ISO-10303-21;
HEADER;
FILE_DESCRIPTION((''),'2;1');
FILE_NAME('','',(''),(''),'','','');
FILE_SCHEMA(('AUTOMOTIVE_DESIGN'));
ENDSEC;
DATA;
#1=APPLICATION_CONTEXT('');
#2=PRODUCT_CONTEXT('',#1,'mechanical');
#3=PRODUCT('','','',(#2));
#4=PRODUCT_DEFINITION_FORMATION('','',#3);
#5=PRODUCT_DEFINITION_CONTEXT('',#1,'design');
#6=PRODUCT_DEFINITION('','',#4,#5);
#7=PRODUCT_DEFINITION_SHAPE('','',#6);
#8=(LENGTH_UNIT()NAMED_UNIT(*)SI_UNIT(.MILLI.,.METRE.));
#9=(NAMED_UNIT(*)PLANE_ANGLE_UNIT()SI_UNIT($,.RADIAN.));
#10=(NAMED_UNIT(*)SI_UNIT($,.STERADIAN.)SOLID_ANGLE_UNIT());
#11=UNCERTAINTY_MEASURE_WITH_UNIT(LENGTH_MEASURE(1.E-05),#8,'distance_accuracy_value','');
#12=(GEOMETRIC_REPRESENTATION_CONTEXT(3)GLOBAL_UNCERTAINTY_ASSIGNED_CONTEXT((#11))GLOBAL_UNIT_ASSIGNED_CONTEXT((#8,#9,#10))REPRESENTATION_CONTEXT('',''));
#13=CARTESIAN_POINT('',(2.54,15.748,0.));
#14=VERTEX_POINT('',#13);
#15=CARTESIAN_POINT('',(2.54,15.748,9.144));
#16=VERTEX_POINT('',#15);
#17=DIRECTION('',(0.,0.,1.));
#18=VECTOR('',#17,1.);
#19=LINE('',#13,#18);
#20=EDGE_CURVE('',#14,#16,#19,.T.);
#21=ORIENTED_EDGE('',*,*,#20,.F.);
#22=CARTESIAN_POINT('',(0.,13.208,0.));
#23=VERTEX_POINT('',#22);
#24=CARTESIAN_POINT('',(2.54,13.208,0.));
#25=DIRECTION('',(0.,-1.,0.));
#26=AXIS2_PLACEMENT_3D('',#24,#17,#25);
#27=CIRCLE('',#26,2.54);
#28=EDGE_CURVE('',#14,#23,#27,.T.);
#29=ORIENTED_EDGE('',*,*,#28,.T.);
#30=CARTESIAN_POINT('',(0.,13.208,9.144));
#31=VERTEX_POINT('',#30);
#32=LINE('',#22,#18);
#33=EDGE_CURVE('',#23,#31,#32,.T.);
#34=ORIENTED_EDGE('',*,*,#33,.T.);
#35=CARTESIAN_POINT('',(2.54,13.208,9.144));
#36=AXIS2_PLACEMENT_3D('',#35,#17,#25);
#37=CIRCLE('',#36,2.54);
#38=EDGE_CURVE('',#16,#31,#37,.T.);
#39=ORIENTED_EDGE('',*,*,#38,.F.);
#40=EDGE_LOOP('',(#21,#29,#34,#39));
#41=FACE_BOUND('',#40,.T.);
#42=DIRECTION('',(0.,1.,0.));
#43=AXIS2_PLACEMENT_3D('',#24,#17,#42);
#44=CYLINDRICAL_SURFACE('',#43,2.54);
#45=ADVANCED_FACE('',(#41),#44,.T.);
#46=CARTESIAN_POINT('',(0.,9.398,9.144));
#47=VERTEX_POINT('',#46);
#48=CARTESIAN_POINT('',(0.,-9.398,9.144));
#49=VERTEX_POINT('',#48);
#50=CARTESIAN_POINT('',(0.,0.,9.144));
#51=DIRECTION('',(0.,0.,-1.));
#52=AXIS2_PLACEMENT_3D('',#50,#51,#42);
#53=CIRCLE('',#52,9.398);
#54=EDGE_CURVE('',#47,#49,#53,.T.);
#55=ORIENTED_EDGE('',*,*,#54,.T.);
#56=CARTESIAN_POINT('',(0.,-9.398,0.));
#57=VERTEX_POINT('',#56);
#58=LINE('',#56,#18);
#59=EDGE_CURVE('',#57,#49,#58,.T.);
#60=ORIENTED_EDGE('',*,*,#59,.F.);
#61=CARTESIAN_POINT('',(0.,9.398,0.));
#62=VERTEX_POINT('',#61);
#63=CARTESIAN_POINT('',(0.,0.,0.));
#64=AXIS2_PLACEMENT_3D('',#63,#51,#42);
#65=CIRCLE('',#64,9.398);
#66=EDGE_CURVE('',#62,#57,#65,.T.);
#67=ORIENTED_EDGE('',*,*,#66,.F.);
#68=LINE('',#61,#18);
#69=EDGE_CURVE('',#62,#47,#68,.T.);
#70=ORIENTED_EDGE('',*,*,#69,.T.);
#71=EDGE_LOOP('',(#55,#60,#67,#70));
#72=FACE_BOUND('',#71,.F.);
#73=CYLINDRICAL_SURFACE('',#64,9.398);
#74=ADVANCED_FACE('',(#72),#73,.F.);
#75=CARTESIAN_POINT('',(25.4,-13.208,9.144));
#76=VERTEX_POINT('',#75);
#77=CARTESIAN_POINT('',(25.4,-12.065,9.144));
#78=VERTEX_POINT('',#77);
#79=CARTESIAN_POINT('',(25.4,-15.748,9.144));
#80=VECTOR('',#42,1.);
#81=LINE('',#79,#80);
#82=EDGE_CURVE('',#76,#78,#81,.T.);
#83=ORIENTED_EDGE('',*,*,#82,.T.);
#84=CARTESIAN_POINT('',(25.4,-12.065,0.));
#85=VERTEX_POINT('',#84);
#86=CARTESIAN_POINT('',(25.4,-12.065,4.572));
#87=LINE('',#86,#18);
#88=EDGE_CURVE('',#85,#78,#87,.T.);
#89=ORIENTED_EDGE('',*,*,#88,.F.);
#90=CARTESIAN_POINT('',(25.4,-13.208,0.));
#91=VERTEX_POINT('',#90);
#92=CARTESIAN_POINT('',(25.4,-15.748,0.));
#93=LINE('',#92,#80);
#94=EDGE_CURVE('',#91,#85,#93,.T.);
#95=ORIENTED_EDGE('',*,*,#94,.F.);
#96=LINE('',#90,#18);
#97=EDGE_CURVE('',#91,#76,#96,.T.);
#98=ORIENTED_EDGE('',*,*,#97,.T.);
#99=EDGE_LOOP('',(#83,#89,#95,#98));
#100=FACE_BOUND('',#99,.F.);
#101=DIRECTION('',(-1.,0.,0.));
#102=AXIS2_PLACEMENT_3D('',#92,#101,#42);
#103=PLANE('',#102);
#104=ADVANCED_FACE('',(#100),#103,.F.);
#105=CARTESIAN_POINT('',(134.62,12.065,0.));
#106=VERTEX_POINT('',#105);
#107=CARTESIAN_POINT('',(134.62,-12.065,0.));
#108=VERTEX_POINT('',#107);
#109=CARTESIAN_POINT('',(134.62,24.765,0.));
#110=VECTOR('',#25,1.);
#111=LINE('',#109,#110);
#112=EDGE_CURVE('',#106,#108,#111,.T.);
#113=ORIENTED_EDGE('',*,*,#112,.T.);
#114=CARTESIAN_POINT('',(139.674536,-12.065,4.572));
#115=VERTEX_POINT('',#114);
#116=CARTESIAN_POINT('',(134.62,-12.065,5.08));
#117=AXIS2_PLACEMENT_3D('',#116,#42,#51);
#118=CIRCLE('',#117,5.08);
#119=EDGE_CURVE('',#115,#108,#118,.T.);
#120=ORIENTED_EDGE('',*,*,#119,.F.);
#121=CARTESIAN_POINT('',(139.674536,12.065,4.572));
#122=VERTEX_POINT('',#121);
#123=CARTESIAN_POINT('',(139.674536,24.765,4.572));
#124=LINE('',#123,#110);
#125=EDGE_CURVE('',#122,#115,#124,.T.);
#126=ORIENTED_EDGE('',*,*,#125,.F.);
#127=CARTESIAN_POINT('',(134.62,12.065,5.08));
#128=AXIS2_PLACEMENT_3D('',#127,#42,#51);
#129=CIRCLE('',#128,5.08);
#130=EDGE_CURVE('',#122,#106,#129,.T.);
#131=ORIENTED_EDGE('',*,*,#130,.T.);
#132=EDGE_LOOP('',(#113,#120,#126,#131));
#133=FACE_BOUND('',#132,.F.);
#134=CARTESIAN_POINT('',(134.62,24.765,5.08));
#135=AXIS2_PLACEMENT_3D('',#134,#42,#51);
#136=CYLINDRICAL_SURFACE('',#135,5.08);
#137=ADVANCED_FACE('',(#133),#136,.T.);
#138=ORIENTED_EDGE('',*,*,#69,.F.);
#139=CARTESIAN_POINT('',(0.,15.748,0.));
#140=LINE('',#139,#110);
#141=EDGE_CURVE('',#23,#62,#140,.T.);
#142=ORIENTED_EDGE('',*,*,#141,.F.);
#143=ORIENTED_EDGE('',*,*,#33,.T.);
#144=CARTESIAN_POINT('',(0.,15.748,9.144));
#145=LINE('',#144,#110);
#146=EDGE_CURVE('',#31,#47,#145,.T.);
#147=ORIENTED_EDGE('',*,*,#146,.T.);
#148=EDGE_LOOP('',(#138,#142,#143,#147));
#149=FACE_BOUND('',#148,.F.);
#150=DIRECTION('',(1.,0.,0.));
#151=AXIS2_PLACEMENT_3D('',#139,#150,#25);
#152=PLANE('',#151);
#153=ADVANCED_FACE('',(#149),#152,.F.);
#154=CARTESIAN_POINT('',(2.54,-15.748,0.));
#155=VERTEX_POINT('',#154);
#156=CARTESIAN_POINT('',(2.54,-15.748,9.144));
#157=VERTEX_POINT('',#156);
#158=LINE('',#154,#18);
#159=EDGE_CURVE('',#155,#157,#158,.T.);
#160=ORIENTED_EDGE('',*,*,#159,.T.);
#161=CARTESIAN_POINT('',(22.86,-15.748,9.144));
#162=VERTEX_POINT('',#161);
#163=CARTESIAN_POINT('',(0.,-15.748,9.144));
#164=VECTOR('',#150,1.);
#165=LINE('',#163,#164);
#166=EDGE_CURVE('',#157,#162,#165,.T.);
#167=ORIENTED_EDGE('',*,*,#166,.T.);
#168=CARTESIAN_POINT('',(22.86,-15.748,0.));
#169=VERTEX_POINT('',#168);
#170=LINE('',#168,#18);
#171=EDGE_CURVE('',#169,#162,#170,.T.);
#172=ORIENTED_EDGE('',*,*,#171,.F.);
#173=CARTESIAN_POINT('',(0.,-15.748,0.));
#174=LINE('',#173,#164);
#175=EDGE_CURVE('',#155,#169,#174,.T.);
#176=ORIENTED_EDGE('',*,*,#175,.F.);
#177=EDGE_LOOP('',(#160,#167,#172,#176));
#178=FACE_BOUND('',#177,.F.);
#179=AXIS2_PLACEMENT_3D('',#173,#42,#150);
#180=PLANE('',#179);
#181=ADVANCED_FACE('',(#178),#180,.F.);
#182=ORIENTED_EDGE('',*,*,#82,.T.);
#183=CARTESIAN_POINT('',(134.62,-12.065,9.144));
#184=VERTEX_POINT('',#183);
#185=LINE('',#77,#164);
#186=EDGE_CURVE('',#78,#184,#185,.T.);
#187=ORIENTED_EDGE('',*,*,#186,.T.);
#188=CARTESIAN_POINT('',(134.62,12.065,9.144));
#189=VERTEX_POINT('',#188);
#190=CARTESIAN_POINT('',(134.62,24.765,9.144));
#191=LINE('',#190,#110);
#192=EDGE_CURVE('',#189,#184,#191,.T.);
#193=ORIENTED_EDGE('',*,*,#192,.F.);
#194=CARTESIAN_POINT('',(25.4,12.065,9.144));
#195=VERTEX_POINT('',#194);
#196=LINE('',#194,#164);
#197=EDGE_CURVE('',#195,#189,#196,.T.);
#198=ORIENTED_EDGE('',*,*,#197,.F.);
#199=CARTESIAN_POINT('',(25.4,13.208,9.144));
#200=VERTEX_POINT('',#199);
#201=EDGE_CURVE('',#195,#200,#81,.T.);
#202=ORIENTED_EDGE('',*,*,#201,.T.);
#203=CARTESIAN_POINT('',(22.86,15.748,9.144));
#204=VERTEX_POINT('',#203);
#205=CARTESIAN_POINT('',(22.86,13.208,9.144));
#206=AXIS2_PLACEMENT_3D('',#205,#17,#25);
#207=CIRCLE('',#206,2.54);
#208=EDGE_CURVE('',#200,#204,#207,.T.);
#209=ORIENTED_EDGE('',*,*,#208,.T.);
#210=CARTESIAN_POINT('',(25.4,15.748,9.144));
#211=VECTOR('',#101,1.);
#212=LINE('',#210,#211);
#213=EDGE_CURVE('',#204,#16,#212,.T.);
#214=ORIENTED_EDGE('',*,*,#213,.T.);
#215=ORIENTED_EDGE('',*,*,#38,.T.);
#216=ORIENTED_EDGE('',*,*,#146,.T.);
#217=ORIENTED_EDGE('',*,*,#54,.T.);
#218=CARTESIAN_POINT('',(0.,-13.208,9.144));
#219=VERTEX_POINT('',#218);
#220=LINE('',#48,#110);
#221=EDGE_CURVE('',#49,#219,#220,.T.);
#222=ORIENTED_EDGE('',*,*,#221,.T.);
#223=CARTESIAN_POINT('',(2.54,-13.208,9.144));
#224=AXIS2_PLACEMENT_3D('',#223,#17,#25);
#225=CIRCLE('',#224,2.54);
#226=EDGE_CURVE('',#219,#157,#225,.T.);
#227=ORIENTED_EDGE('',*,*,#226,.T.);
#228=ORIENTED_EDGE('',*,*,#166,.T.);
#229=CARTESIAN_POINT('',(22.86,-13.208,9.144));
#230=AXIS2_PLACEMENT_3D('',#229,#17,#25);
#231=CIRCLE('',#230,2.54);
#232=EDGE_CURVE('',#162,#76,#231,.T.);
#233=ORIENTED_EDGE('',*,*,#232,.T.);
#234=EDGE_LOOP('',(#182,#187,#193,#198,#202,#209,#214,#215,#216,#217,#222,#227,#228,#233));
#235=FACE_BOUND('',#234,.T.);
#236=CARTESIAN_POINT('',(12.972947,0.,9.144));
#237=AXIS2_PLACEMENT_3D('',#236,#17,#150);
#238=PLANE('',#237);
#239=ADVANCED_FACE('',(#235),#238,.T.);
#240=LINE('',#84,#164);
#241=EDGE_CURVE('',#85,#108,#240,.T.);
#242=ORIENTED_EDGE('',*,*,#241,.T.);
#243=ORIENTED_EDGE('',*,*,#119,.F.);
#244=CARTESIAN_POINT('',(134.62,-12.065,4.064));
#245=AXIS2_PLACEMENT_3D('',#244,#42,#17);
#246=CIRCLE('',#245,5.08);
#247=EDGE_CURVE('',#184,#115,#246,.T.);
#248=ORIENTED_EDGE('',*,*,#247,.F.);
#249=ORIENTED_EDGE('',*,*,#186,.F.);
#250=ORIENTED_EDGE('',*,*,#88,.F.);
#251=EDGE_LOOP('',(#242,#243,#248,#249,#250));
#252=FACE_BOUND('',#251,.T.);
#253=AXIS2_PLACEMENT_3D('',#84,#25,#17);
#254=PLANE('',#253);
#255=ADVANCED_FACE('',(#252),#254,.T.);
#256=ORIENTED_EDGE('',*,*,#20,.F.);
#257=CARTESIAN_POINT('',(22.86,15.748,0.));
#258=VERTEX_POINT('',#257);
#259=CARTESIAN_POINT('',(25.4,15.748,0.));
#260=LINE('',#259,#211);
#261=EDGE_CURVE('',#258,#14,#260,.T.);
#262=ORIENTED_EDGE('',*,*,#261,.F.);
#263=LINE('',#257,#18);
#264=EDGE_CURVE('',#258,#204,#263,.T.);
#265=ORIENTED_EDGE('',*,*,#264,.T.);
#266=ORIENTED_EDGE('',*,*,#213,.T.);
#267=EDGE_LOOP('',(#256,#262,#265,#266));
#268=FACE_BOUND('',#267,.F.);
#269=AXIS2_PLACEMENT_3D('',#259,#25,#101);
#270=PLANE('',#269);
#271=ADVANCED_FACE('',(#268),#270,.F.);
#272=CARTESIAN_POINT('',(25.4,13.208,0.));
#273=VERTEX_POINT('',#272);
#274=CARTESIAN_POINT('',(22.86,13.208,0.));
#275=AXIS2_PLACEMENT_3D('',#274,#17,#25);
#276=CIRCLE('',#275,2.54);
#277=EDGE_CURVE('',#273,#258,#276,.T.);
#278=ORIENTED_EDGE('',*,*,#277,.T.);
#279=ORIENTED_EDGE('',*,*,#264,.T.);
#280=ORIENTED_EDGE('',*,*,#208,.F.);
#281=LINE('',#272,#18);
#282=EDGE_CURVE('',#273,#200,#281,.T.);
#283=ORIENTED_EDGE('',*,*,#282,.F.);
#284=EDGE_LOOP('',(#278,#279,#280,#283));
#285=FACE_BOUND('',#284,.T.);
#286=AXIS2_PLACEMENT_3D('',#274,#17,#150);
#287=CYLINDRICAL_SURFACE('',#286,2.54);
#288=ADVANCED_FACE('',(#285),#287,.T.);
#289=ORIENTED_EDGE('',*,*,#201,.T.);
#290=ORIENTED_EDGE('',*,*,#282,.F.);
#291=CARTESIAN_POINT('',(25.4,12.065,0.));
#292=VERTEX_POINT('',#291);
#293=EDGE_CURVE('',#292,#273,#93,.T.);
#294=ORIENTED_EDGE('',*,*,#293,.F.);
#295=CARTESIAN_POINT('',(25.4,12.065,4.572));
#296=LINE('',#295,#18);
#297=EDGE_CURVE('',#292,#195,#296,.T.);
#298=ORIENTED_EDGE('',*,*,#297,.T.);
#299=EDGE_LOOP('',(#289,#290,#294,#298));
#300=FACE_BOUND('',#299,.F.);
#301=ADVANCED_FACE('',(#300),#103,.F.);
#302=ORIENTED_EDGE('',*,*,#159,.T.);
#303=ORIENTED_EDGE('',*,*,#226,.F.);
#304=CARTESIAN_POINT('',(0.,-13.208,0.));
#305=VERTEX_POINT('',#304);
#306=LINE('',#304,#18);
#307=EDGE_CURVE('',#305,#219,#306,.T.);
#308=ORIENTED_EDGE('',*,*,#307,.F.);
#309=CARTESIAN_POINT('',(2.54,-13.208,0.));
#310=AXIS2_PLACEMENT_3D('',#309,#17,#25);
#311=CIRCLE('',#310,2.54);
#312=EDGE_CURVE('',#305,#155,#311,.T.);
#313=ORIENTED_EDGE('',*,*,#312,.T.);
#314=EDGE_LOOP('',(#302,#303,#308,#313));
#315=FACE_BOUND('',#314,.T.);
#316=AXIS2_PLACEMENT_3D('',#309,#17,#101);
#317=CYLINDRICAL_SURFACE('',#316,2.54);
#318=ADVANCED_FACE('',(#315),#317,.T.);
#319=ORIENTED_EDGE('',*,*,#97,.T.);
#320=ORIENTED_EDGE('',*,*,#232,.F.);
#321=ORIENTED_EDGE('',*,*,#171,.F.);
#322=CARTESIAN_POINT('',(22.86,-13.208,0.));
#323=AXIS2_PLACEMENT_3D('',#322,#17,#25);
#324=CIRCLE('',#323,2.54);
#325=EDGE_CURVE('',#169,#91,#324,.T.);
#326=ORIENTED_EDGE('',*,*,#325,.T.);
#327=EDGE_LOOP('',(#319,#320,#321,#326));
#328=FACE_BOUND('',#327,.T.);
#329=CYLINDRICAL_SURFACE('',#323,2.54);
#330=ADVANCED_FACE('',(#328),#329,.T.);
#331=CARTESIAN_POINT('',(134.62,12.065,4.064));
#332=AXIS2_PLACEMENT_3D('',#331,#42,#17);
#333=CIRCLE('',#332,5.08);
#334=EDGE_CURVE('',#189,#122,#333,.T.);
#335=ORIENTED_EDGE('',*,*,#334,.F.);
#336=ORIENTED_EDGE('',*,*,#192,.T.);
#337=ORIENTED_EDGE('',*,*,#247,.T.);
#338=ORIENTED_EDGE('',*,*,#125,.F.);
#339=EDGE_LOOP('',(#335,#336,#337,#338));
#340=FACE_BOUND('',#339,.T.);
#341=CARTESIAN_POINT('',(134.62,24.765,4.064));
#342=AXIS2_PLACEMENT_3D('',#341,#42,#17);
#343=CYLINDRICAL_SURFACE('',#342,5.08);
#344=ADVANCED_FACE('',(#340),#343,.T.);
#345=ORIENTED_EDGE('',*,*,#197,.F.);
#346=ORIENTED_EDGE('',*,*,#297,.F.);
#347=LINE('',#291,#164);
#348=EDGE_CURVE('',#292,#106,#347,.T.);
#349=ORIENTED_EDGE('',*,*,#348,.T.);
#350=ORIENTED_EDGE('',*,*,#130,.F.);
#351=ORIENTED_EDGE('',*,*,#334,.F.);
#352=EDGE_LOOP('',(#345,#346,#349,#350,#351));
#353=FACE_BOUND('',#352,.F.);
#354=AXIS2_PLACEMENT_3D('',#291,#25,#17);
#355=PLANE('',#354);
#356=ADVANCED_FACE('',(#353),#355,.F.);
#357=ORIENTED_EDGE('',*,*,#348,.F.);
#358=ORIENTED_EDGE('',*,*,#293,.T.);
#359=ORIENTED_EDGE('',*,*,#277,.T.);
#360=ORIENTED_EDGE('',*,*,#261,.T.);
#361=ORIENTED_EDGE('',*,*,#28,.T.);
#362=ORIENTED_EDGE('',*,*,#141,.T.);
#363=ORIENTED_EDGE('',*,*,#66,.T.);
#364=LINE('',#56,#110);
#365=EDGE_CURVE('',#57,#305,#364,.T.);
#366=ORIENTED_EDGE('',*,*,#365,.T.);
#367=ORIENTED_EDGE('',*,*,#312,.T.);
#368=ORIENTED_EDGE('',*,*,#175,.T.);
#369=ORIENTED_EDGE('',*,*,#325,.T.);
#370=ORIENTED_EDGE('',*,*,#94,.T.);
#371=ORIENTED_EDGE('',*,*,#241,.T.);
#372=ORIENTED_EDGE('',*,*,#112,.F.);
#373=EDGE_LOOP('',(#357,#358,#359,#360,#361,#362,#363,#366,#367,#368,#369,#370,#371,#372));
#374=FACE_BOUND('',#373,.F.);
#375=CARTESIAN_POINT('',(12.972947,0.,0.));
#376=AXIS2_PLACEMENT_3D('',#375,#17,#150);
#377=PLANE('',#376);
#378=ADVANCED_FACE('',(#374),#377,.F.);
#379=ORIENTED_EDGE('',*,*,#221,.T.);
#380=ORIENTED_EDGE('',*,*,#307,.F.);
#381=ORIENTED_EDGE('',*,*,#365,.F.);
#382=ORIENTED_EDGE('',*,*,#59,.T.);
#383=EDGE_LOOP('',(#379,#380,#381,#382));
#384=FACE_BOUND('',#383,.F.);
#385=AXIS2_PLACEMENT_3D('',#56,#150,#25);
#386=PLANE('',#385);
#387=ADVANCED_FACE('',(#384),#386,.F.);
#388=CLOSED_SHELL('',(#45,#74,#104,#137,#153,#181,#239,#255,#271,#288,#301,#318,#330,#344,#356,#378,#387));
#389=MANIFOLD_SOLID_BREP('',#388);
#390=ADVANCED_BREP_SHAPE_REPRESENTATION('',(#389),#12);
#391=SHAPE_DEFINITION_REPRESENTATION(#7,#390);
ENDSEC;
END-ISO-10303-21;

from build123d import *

# Parameters (mm, degrees)
F1_DEPTH    = 9.144
F2_R        = 2.54
F3_W        = 24.13
F3_H        = 9.144
F4_DEPTH    = 114.3
F5_T1_DEPTH = 49.53


# Not quite as in the source:
# - a fillet or chamfer that OpenCascade refuses, or shapes differently, is made with other operations: its cross-section is extruded or revolved along the edge and cut away or added


with BuildPart() as f1:
    # F0 (on Top) → F1 (new body)
    with BuildSketch(Plane.XY):
        with BuildLine():
            ThreePointArc((0, 9.398), (9.398, 0), (0, -9.398))
            Line((0, -9.398), (0, -15.748))
            Line((0, -15.748), (25.4, -15.748))
            Line((25.4, -15.748), (25.4, 15.748))
            Line((25.4, 15.748), (0, 15.748))
            Line((0, 15.748), (0, 9.398))
        make_face()
    extrude(amount=F1_DEPTH)

    # F2
    f2_edges = [f1.edges().sort_by_distance(p)[0] for p in [
        (25.4, -15.748, 4.572),
        (0, -15.748, 4.572),
        (0, 15.748, 4.572),
        (25.4, 15.748, 4.572),
    ]]
    fillet(f2_edges, radius=F2_R)

    # F3 (on face) → F4 (join)
    with BuildSketch(Plane.YZ.offset(25.4)):
        with Locations((0, 4.572)):
            Rectangle(F3_W, F3_H)
    extrude(amount=F4_DEPTH)

    # F5: fillet of radius 5.08 on 2 edges, made by hand

    # F5_s2 → F5_t1 (cut)
    with BuildSketch(Plane.XZ.offset(-24.765)):
        with BuildLine():
            ThreePointArc((134.62, 9.144), (138.2121024484, 7.6561024484), (139.7, 4.064))
            Line((139.7, 4.064), (139.7, 9.144))
            Line((139.7, 9.144), (134.62, 9.144))
        make_face()
        with BuildLine():
            ThreePointArc((134.62, 0), (138.2121024484, 1.4878975516), (139.7, 5.08))
            Line((139.7, 5.08), (139.7, 0))
            Line((139.7, 0), (134.62, 0))
        make_face()
    extrude(amount=F5_T1_DEPTH, mode=Mode.SUBTRACT)


solid = f1.part
